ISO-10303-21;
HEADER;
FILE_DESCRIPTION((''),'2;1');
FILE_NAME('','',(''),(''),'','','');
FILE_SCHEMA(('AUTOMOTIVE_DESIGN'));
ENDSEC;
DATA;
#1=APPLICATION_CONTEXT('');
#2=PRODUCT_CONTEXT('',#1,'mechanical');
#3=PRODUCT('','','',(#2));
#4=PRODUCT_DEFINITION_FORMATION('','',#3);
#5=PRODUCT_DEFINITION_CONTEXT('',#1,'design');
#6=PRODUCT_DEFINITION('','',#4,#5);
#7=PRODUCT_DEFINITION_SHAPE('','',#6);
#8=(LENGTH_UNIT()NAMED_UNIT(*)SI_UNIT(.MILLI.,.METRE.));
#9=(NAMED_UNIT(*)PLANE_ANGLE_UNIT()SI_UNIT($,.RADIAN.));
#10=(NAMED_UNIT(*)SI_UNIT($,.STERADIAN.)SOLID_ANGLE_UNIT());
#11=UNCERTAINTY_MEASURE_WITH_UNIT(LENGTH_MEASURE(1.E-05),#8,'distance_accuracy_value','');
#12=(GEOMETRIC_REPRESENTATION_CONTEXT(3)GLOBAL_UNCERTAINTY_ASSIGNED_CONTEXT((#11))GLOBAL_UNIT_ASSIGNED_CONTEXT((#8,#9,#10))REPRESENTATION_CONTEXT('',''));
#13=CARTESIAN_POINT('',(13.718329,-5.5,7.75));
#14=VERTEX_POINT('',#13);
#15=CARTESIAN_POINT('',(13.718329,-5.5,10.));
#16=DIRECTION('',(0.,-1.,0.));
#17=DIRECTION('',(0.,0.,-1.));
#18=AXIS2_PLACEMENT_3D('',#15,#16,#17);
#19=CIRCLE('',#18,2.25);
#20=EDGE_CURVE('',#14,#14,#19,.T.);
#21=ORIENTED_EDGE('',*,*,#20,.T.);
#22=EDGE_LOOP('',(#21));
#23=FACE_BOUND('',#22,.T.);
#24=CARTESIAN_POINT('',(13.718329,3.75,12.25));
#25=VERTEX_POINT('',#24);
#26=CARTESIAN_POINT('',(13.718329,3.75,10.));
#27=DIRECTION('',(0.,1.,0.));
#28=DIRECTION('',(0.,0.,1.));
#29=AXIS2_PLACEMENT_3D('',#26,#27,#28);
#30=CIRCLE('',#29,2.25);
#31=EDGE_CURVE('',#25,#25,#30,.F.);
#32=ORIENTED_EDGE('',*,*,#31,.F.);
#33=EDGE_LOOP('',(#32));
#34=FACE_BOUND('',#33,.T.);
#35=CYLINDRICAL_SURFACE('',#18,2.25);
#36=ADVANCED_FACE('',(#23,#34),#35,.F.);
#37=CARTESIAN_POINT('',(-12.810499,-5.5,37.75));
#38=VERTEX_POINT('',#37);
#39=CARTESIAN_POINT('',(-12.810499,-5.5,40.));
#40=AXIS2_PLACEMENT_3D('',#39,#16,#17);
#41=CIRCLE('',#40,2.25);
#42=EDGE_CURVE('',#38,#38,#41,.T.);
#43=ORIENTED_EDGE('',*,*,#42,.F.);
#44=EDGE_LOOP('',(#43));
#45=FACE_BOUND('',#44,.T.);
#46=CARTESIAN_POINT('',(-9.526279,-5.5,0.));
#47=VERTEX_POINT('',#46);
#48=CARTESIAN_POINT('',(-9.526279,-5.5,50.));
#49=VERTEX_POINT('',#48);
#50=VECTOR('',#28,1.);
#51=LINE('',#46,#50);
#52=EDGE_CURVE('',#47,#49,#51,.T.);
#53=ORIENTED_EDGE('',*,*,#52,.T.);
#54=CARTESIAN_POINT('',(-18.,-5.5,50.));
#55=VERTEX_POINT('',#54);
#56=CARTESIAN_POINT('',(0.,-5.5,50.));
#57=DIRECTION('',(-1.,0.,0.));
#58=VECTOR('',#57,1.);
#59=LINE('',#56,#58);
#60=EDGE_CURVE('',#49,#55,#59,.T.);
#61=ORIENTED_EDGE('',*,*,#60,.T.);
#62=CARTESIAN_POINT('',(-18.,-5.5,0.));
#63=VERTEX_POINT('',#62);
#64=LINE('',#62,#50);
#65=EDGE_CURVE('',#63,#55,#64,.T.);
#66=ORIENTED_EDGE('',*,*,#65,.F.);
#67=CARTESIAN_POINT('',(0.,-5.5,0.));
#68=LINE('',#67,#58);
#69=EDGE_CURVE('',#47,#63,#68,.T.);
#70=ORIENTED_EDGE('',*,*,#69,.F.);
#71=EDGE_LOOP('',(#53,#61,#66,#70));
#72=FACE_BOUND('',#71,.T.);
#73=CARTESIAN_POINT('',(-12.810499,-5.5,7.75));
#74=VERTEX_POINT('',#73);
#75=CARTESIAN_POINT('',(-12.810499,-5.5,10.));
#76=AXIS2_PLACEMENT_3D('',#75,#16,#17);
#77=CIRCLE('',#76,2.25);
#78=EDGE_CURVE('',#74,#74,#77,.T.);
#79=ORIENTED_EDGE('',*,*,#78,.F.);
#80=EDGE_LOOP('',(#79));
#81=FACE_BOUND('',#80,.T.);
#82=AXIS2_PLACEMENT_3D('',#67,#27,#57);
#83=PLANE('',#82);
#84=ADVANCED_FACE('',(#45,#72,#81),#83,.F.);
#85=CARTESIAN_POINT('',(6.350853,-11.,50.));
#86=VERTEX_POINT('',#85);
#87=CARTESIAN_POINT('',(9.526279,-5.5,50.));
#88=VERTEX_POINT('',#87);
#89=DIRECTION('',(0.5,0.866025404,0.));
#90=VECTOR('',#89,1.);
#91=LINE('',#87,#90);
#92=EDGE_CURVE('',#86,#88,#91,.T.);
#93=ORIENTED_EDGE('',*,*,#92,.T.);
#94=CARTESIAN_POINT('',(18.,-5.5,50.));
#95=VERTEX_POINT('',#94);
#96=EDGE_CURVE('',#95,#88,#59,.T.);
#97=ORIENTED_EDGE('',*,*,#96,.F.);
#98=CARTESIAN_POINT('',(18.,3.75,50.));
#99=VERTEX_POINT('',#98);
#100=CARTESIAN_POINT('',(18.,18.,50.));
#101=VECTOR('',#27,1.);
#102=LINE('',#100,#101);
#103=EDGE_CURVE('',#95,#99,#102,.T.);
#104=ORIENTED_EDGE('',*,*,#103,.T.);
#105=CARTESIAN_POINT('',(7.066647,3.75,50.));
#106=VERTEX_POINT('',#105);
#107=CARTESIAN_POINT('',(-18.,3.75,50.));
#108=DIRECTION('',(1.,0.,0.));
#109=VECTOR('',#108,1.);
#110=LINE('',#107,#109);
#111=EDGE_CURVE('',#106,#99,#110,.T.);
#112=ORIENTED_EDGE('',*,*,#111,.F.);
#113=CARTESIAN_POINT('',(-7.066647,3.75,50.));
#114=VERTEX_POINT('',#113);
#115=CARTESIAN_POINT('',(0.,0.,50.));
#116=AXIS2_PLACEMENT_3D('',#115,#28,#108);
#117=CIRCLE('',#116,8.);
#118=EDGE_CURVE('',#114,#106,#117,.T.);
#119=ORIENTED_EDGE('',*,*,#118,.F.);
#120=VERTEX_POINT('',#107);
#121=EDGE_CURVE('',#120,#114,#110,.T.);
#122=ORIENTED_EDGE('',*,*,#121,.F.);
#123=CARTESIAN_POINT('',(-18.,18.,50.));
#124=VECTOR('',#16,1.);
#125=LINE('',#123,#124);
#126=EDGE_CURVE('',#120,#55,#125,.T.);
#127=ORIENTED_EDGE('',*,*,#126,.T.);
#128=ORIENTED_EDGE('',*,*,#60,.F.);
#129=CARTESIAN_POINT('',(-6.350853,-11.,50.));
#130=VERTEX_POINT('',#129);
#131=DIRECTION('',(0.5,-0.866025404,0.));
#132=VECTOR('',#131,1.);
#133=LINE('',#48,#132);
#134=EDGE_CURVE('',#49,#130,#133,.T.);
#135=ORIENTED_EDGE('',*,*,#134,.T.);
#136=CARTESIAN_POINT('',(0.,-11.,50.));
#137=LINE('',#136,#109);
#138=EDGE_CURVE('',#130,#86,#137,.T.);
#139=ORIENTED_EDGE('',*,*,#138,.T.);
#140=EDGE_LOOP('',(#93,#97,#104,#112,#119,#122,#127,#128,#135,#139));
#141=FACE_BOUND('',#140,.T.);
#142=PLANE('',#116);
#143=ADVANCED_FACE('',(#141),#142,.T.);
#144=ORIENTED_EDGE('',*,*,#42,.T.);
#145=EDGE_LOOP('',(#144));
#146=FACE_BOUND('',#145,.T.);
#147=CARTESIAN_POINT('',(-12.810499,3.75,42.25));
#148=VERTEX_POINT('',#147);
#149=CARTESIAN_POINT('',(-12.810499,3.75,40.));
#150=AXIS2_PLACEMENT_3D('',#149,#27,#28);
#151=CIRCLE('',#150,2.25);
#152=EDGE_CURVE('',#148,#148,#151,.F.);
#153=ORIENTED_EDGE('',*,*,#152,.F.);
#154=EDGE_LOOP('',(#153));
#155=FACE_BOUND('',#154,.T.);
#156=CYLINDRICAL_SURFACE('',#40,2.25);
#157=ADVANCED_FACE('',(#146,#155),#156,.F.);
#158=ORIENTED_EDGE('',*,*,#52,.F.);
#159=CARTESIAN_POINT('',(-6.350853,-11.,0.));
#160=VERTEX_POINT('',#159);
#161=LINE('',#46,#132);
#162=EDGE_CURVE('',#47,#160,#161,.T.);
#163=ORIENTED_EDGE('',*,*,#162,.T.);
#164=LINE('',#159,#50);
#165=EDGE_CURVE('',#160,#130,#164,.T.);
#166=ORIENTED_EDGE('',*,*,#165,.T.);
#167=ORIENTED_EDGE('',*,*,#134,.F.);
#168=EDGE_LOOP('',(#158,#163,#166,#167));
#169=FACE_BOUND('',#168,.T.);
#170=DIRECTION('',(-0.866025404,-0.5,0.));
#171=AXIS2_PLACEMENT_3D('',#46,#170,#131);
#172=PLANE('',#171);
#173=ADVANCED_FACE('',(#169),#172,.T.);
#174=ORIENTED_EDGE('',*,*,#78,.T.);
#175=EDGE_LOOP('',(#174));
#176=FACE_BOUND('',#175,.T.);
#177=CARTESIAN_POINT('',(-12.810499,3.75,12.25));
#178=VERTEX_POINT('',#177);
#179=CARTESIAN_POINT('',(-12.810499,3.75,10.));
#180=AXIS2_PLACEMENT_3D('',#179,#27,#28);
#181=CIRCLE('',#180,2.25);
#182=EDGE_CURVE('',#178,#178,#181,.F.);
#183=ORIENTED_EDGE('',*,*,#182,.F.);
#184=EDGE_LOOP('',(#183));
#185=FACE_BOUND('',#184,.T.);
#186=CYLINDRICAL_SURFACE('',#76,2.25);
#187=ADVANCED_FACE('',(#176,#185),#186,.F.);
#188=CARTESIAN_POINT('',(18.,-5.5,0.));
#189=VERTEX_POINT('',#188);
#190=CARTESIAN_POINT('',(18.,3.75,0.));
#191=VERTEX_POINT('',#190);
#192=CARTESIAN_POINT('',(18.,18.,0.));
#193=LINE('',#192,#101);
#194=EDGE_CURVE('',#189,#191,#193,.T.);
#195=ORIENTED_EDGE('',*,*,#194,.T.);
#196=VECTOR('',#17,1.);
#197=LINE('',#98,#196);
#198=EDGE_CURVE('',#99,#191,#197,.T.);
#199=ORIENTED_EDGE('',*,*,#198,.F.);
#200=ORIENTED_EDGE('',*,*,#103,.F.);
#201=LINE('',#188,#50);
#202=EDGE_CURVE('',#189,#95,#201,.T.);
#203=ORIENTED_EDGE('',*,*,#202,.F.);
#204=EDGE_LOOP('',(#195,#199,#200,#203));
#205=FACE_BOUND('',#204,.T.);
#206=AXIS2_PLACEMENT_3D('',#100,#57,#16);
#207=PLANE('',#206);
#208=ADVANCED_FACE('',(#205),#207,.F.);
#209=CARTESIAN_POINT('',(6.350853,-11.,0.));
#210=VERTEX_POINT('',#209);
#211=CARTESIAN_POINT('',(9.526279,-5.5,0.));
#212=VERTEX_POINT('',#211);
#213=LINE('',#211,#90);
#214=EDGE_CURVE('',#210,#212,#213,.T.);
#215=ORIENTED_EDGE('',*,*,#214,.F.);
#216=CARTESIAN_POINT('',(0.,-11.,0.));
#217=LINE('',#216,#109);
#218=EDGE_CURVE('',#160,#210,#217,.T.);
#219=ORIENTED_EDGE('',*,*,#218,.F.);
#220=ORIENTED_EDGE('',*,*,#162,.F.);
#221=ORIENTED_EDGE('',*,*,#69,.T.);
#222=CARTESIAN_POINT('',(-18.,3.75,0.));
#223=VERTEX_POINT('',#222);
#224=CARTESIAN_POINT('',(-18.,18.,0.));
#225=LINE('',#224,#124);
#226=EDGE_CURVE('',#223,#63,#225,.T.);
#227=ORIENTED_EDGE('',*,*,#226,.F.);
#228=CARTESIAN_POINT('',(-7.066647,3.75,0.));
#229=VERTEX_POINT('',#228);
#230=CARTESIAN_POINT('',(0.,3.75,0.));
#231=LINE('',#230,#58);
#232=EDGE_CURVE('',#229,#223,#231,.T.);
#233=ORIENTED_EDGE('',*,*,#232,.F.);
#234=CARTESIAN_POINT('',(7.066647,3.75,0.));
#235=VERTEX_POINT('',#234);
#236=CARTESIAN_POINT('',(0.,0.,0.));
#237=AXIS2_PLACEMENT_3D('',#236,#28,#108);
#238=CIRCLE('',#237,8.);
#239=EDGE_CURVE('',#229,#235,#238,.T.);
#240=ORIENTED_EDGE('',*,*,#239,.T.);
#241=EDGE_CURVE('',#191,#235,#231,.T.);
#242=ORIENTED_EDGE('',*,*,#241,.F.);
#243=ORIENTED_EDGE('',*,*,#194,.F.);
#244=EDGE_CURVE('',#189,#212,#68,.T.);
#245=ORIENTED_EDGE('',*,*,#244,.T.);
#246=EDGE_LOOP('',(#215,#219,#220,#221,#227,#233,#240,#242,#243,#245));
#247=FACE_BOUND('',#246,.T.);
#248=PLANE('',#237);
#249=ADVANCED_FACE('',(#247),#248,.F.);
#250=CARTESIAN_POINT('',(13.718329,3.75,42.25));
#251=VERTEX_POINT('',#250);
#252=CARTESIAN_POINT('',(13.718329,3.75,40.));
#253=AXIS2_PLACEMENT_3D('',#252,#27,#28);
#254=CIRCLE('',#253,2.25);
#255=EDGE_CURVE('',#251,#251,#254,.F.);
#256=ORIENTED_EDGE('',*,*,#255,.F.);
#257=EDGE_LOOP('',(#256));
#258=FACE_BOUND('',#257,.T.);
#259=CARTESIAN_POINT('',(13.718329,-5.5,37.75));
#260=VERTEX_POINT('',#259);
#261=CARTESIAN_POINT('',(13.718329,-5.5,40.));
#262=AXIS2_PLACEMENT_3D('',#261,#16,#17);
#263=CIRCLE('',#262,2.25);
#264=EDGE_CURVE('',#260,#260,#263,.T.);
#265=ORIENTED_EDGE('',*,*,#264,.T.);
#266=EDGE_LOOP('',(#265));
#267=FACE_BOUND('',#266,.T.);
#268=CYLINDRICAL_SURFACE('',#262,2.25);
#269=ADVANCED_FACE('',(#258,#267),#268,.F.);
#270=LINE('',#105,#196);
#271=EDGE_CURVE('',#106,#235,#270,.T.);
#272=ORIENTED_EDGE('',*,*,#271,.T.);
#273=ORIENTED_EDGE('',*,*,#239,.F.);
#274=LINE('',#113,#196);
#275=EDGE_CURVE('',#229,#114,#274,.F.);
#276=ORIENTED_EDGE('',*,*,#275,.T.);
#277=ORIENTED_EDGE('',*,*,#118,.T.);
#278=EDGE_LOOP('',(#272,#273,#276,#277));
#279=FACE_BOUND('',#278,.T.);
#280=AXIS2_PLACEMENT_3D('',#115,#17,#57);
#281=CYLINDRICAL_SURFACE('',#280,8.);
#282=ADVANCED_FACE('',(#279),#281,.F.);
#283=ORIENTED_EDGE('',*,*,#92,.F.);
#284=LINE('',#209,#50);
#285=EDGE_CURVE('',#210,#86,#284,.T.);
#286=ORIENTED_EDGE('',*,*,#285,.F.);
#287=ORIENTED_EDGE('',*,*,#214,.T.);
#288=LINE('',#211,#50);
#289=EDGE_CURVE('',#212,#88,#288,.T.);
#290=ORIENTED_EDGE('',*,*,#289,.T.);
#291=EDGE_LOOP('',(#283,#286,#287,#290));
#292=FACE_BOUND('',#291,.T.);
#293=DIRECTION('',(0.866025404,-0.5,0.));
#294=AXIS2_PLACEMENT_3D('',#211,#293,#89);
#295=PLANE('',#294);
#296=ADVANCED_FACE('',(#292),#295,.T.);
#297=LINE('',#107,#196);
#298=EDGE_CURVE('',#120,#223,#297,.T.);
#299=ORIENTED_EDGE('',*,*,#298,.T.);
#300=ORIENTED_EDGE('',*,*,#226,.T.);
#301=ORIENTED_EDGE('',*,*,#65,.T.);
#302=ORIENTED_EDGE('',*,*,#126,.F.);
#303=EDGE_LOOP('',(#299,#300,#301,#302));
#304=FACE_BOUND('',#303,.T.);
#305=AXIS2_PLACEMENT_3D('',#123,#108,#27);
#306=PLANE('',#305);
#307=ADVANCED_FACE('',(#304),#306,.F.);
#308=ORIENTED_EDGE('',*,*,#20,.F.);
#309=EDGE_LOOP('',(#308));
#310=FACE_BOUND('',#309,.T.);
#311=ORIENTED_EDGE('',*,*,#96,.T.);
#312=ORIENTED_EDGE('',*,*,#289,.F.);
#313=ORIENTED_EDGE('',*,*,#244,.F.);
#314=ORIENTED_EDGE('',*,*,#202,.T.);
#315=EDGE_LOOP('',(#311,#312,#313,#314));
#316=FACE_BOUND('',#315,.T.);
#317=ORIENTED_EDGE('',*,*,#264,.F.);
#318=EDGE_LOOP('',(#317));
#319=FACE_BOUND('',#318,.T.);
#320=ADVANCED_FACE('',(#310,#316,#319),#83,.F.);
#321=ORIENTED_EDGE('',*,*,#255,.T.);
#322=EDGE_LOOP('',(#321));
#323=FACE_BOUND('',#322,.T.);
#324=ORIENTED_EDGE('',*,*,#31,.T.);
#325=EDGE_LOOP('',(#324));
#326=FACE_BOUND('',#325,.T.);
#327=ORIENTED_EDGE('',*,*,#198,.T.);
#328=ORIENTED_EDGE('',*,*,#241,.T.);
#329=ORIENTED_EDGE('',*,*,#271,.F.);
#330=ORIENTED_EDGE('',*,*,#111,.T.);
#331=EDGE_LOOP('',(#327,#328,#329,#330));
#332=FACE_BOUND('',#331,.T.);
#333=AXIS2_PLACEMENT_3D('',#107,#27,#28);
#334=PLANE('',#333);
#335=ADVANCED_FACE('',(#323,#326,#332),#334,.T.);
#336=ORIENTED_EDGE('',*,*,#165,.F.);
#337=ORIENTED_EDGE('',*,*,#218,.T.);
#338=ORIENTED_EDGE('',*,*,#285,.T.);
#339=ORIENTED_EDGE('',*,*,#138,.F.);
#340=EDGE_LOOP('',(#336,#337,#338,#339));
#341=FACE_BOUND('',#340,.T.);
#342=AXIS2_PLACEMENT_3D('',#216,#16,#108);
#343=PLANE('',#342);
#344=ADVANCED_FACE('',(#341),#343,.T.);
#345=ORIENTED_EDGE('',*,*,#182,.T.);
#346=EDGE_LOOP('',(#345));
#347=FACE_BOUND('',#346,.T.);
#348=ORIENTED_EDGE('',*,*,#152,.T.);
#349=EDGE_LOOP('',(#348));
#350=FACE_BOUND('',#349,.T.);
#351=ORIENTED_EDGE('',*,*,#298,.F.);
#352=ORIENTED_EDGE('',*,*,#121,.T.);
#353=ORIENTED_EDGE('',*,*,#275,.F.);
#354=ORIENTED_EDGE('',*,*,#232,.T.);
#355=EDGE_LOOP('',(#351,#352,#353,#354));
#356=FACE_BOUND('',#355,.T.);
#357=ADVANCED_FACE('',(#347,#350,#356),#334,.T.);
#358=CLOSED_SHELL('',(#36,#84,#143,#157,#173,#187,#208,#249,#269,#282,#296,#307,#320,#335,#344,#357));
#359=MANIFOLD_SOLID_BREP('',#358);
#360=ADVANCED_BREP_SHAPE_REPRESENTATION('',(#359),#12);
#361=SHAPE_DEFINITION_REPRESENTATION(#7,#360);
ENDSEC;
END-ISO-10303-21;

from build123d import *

# Parameters (mm, degrees)
IZIM1_W                     = 36
IZIM1_H                     = 36
IZIM1_R                     = 8
Y_KSEKLIK_EKSTR_ZYON1_DEPTH = 50
IZIM2_W                     = 36
IZIM2_H                     = 5
KES_EKSTR_ZYON1_DEPTH       = 50
IZIM3_W                     = 36
IZIM3_H                     = 3
KES_EKSTR_ZYON2_DEPTH       = 50
KES_EKSTR_ZYON3_DEPTH       = 50
M4_BO_LUKLU_DELIK1_D        = 4.5
KES_EKSTR_ZYON5_START       = -50
KES_EKSTR_ZYON5_DEPTH       = 50


# Read off the part's stored shape, not the designer's step: Kes-Ekstrüzyon5
with BuildPart() as part:
    # Çizim1 → Yükseklik-Ekstrüzyon1 (new body)
    with BuildSketch(Plane.XY):
        Rectangle(IZIM1_W, IZIM1_H)
        Circle(IZIM1_R, mode=Mode.SUBTRACT)
    extrude(amount=Y_KSEKLIK_EKSTR_ZYON1_DEPTH)

    # Çizim2 → Kes-Ekstrüzyon1 (cut)
    with BuildSketch(Plane.XY.offset(50)):
        with Locations((0, 15.5)):
            Rectangle(IZIM2_W, IZIM2_H)
    extrude(amount=-KES_EKSTR_ZYON1_DEPTH, mode=Mode.SUBTRACT)

    # Çizim3 → Kes-Ekstrüzyon2 (cut)
    with BuildSketch(Plane.XY.offset(50)):
        with Locations((0, -16.5)):
            Rectangle(IZIM3_W, IZIM3_H)
    extrude(amount=-KES_EKSTR_ZYON2_DEPTH, mode=Mode.SUBTRACT)

    # Çizim4 → Kes-Ekstrüzyon3 (cut)
    with BuildSketch(Plane.XY.offset(50)):
        Polygon((-6.350852961, -11), (-9.526279442, -5.5), (-18, -5.5), (-18, -15), (18, -15), (18, -5.5), (9.526279442, -5.5), (6.350852961, -11), align=None)
    extrude(amount=-KES_EKSTR_ZYON3_DEPTH, mode=Mode.SUBTRACT)

    # M4 Boşluklu Delik1 (through all)
    with Locations(Plane(origin=(0, -5.5, 0), x_dir=(-1, 0, 0), z_dir=(0, -1, 0))):
        with Locations((-13.718329125, -40), (-13.718329125, -10), (12.810498521, -10), (12.810498521, -40)):
            Hole(M4_BO_LUKLU_DELIK1_D / 2)

    # Kes-Ekstrüzyon5 outline → Kes-Ekstrüzyon5 (cut)
    with BuildSketch(Plane.XY.offset(50).offset(KES_EKSTR_ZYON5_START)):
        with BuildLine():
            Line((7.066647013, 3.75), (18, 3.75))
            Line((18, 3.75), (18, 13))
            Line((18, 13), (-18, 13))
            Line((-18, 13), (-18, 3.75))
            Line((-18, 3.75), (-7.066647013, 3.75))
            ThreePointArc((-7.066647013, 3.75), (0, 8), (7.066647013, 3.75))
        make_face()
    extrude(amount=KES_EKSTR_ZYON5_DEPTH, mode=Mode.SUBTRACT)


solid = part.part
